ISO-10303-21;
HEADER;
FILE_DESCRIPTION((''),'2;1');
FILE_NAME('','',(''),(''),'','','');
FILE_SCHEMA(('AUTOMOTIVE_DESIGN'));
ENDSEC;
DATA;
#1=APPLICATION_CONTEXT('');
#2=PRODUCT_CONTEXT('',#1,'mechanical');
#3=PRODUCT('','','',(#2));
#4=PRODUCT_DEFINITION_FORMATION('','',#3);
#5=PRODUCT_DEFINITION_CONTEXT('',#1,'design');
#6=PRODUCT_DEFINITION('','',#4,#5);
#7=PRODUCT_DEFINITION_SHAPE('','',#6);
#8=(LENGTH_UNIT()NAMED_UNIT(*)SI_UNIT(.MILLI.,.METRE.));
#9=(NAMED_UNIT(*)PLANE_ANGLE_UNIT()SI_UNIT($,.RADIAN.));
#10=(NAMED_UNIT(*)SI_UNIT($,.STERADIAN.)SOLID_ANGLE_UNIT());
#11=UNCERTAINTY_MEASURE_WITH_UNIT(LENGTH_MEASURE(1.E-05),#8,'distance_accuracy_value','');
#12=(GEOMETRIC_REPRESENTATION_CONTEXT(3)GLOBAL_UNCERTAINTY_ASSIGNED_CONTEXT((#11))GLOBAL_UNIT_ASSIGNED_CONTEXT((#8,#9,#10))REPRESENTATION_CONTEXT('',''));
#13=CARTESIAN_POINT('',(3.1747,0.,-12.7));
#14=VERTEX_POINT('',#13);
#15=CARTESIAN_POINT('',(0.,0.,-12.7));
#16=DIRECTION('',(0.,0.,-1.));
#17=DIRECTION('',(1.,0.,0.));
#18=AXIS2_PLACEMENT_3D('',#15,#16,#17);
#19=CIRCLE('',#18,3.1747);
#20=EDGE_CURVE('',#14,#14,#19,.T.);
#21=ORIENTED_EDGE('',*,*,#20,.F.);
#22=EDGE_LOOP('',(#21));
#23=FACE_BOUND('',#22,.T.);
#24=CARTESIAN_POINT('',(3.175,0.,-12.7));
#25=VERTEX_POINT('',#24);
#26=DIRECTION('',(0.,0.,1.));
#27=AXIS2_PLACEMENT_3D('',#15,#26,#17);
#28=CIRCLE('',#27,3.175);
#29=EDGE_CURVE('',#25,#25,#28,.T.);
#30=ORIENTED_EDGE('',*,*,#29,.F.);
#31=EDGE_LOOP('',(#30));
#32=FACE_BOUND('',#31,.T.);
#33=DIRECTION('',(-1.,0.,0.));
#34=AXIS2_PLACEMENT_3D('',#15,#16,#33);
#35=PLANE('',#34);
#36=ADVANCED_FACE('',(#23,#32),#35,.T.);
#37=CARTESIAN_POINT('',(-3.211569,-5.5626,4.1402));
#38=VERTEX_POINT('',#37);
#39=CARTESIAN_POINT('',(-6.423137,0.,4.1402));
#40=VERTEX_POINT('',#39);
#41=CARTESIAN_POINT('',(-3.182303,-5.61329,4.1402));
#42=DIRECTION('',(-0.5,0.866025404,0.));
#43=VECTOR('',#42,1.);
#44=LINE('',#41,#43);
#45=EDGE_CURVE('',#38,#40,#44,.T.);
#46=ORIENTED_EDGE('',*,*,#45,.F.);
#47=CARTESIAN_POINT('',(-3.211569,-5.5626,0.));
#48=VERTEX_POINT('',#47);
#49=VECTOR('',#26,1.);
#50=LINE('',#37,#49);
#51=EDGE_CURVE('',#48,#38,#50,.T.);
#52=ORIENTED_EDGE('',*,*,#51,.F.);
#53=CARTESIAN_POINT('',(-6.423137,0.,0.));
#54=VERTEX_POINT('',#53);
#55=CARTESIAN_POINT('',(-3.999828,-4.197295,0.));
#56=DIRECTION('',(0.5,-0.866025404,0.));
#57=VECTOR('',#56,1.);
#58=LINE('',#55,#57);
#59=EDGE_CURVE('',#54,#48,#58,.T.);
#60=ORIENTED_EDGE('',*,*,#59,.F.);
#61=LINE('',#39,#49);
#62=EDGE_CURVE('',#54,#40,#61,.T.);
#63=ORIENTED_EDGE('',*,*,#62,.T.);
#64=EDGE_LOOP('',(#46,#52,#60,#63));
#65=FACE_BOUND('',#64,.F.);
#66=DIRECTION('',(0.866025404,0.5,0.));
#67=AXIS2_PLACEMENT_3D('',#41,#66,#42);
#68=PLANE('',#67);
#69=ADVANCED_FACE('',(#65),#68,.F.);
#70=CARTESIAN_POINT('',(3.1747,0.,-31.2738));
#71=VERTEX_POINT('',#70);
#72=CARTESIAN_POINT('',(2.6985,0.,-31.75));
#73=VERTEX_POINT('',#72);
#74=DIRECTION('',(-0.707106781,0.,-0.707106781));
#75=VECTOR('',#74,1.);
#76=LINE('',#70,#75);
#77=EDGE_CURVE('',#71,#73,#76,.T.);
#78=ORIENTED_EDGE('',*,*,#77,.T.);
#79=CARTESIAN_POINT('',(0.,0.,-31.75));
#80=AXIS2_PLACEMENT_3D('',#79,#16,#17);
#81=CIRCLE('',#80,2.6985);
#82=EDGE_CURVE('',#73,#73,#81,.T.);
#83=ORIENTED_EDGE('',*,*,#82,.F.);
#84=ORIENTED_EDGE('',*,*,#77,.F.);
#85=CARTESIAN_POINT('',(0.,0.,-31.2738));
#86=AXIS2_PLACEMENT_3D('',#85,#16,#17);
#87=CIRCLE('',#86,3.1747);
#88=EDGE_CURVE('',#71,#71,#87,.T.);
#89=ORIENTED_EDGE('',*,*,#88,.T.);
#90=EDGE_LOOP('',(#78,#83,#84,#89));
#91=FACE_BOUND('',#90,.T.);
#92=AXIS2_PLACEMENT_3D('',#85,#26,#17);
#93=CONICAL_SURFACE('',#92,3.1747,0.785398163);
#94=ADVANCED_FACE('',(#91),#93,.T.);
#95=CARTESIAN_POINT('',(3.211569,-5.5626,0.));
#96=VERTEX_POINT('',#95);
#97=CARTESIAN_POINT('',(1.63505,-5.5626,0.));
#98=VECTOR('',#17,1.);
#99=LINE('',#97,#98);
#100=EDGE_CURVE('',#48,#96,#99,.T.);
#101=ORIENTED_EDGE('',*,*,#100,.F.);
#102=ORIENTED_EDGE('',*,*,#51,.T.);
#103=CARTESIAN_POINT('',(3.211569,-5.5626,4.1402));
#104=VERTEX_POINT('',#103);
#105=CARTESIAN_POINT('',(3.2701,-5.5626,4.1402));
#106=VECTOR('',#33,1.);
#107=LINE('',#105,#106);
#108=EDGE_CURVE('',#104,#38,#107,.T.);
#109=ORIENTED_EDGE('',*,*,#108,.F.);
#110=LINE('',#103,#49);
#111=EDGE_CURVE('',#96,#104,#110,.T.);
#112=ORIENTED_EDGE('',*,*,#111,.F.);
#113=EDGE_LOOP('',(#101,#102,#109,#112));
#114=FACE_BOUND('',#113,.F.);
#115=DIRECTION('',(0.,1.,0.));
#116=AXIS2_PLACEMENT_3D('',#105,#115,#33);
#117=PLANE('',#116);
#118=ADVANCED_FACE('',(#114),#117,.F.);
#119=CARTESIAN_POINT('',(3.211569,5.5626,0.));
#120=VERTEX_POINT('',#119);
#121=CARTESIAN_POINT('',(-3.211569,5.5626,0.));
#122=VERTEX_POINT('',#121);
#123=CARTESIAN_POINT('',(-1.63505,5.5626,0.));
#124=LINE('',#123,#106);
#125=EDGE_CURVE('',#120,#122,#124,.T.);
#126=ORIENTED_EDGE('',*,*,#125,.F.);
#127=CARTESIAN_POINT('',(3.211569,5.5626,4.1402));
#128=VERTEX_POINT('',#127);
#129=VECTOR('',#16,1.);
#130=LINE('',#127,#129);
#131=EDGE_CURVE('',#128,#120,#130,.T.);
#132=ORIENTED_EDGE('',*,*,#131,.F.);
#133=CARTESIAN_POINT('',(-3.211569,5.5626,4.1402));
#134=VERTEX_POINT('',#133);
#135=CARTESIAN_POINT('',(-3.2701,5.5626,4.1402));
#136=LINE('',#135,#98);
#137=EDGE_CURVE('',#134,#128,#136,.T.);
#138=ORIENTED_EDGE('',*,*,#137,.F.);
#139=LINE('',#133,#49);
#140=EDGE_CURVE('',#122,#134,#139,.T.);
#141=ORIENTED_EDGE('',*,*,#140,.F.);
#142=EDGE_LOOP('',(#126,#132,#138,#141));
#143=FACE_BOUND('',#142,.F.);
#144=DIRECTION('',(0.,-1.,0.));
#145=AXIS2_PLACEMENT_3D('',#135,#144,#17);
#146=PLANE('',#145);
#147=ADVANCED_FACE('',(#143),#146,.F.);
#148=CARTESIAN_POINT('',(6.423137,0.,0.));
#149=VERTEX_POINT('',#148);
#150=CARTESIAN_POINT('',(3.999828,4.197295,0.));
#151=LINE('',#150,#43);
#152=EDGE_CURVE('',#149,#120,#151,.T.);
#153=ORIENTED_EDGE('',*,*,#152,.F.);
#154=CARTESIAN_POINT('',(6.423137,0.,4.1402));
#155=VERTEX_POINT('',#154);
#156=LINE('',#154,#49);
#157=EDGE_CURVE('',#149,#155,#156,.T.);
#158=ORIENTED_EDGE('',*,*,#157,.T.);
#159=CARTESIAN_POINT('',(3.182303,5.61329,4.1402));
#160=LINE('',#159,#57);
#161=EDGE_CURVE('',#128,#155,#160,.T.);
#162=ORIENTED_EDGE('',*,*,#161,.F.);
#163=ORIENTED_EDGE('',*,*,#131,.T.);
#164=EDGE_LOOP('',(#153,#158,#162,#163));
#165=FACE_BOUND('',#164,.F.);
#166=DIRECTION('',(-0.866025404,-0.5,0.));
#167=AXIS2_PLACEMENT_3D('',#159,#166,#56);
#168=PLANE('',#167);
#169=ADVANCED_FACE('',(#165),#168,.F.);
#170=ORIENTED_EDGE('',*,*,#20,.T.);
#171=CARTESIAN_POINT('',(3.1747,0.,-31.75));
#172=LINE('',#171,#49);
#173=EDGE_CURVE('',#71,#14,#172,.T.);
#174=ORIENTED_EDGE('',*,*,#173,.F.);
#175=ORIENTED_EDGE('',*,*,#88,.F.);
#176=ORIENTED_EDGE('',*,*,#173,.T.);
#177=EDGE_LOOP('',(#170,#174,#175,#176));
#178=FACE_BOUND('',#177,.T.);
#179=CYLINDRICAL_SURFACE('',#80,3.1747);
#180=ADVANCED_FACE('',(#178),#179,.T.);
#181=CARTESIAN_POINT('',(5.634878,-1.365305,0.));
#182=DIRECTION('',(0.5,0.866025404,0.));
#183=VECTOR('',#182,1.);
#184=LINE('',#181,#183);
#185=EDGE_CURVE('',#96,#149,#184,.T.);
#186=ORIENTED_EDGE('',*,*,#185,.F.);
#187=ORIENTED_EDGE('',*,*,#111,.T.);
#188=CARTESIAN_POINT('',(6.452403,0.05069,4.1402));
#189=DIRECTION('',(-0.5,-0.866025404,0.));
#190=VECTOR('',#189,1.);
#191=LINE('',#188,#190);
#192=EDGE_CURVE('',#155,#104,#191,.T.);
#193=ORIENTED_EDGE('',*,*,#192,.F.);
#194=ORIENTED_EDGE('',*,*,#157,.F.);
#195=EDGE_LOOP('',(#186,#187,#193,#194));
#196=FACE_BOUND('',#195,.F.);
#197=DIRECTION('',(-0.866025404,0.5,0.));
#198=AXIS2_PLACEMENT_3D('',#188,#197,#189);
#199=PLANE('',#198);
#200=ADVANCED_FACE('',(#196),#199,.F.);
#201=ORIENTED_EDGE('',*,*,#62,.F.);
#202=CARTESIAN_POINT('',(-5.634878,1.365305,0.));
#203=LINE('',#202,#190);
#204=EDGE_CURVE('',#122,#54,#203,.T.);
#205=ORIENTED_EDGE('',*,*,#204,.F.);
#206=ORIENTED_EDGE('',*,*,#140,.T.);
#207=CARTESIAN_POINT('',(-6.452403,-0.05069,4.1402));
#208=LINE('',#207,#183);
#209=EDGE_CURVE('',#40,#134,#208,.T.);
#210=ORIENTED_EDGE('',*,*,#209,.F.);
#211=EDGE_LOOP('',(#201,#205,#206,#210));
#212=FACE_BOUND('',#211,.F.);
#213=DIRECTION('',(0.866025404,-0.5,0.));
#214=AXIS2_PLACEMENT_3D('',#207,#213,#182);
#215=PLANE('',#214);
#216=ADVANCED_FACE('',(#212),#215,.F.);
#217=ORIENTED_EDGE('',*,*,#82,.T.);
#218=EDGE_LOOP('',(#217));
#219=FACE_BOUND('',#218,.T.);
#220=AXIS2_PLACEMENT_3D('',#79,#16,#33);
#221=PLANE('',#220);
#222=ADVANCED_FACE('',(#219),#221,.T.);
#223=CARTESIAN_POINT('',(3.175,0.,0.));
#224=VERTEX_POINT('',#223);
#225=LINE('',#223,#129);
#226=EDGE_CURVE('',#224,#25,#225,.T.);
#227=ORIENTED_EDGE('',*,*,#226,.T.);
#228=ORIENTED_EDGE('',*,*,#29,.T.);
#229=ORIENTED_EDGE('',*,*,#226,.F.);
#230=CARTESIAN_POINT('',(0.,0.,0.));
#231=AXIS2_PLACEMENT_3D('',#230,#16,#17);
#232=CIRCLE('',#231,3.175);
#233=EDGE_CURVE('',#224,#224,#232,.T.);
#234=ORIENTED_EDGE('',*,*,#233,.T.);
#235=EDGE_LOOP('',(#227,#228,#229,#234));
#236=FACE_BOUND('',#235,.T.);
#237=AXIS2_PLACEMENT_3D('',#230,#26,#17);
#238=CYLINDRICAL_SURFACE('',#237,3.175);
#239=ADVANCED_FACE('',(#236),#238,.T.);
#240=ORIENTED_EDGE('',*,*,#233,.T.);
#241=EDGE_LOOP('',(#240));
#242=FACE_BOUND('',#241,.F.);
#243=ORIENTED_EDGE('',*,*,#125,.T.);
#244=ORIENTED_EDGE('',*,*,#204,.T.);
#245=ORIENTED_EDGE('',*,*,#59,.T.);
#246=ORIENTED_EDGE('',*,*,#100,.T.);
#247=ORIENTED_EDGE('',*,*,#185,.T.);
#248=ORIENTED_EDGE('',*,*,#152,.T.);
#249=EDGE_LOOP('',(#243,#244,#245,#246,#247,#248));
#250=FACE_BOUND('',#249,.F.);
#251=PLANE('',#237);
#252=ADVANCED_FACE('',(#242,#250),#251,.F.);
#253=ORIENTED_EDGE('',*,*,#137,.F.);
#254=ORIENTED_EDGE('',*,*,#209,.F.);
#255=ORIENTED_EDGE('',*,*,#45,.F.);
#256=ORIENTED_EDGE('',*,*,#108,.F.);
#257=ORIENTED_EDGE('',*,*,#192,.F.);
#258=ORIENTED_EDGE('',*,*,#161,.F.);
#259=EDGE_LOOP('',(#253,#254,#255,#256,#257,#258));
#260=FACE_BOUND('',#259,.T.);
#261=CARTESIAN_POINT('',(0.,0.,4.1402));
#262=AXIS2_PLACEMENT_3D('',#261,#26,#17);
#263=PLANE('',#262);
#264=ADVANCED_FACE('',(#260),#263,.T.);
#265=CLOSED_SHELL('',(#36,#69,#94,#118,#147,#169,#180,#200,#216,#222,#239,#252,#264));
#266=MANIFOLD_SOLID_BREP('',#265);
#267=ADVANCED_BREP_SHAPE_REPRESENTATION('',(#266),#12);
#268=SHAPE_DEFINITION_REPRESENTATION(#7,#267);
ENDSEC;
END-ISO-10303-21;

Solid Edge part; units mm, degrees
sketch "Sketch1" plane through (0, 0, 0) normal (0, 0, 1) x (1, 0, 0)
  circle A0 centre (0, 0) radius 6.4526
  dimension "D1" = 12.9052
extrude "Protrusion1" add sketch "Sketch1" along normal blind 4.1402
sketch "Sketch2" plane through (0, 0, 0) normal (0, 0, -1) x (1, 0, 0)
  circle A0 centre (0, 0) radius 3.175
extrude "Protrusion2" add sketch "Sketch2" along normal blind 31.75
sketch "Sketch3" plane through (0, 0, -31.75) normal (0, 0, -1) x (1, 0, 0)
  circle A0 centre (0, 0) radius 3.1747
extrude "Cutout1" cut sketch "Sketch3" against normal blind 19.05 flip side to cut
chamfer "Chamfer_1" distance 0.4762 angle 45 1 edges at (-3.1747, 0, -31.75)
sketch "Sketch4" plane through (0, 0, 4.1402) normal (0, 0, 1) x (1, 0, 0)
  line L0 (-3.2701, 5.5626) -> (3.2701, 5.5626)
  dimension "D1" = 11.1252
extrude "Cutout2" cut sketch "Sketch4" against normal up to next material side at (0, 5.6126, 4.1402)
pattern_circular "Pattern1" count 6 over 360 about axis through (0, 0, 4.1402) along (0, 0, 1) of "Cutout2"
properties part number "24103998"
